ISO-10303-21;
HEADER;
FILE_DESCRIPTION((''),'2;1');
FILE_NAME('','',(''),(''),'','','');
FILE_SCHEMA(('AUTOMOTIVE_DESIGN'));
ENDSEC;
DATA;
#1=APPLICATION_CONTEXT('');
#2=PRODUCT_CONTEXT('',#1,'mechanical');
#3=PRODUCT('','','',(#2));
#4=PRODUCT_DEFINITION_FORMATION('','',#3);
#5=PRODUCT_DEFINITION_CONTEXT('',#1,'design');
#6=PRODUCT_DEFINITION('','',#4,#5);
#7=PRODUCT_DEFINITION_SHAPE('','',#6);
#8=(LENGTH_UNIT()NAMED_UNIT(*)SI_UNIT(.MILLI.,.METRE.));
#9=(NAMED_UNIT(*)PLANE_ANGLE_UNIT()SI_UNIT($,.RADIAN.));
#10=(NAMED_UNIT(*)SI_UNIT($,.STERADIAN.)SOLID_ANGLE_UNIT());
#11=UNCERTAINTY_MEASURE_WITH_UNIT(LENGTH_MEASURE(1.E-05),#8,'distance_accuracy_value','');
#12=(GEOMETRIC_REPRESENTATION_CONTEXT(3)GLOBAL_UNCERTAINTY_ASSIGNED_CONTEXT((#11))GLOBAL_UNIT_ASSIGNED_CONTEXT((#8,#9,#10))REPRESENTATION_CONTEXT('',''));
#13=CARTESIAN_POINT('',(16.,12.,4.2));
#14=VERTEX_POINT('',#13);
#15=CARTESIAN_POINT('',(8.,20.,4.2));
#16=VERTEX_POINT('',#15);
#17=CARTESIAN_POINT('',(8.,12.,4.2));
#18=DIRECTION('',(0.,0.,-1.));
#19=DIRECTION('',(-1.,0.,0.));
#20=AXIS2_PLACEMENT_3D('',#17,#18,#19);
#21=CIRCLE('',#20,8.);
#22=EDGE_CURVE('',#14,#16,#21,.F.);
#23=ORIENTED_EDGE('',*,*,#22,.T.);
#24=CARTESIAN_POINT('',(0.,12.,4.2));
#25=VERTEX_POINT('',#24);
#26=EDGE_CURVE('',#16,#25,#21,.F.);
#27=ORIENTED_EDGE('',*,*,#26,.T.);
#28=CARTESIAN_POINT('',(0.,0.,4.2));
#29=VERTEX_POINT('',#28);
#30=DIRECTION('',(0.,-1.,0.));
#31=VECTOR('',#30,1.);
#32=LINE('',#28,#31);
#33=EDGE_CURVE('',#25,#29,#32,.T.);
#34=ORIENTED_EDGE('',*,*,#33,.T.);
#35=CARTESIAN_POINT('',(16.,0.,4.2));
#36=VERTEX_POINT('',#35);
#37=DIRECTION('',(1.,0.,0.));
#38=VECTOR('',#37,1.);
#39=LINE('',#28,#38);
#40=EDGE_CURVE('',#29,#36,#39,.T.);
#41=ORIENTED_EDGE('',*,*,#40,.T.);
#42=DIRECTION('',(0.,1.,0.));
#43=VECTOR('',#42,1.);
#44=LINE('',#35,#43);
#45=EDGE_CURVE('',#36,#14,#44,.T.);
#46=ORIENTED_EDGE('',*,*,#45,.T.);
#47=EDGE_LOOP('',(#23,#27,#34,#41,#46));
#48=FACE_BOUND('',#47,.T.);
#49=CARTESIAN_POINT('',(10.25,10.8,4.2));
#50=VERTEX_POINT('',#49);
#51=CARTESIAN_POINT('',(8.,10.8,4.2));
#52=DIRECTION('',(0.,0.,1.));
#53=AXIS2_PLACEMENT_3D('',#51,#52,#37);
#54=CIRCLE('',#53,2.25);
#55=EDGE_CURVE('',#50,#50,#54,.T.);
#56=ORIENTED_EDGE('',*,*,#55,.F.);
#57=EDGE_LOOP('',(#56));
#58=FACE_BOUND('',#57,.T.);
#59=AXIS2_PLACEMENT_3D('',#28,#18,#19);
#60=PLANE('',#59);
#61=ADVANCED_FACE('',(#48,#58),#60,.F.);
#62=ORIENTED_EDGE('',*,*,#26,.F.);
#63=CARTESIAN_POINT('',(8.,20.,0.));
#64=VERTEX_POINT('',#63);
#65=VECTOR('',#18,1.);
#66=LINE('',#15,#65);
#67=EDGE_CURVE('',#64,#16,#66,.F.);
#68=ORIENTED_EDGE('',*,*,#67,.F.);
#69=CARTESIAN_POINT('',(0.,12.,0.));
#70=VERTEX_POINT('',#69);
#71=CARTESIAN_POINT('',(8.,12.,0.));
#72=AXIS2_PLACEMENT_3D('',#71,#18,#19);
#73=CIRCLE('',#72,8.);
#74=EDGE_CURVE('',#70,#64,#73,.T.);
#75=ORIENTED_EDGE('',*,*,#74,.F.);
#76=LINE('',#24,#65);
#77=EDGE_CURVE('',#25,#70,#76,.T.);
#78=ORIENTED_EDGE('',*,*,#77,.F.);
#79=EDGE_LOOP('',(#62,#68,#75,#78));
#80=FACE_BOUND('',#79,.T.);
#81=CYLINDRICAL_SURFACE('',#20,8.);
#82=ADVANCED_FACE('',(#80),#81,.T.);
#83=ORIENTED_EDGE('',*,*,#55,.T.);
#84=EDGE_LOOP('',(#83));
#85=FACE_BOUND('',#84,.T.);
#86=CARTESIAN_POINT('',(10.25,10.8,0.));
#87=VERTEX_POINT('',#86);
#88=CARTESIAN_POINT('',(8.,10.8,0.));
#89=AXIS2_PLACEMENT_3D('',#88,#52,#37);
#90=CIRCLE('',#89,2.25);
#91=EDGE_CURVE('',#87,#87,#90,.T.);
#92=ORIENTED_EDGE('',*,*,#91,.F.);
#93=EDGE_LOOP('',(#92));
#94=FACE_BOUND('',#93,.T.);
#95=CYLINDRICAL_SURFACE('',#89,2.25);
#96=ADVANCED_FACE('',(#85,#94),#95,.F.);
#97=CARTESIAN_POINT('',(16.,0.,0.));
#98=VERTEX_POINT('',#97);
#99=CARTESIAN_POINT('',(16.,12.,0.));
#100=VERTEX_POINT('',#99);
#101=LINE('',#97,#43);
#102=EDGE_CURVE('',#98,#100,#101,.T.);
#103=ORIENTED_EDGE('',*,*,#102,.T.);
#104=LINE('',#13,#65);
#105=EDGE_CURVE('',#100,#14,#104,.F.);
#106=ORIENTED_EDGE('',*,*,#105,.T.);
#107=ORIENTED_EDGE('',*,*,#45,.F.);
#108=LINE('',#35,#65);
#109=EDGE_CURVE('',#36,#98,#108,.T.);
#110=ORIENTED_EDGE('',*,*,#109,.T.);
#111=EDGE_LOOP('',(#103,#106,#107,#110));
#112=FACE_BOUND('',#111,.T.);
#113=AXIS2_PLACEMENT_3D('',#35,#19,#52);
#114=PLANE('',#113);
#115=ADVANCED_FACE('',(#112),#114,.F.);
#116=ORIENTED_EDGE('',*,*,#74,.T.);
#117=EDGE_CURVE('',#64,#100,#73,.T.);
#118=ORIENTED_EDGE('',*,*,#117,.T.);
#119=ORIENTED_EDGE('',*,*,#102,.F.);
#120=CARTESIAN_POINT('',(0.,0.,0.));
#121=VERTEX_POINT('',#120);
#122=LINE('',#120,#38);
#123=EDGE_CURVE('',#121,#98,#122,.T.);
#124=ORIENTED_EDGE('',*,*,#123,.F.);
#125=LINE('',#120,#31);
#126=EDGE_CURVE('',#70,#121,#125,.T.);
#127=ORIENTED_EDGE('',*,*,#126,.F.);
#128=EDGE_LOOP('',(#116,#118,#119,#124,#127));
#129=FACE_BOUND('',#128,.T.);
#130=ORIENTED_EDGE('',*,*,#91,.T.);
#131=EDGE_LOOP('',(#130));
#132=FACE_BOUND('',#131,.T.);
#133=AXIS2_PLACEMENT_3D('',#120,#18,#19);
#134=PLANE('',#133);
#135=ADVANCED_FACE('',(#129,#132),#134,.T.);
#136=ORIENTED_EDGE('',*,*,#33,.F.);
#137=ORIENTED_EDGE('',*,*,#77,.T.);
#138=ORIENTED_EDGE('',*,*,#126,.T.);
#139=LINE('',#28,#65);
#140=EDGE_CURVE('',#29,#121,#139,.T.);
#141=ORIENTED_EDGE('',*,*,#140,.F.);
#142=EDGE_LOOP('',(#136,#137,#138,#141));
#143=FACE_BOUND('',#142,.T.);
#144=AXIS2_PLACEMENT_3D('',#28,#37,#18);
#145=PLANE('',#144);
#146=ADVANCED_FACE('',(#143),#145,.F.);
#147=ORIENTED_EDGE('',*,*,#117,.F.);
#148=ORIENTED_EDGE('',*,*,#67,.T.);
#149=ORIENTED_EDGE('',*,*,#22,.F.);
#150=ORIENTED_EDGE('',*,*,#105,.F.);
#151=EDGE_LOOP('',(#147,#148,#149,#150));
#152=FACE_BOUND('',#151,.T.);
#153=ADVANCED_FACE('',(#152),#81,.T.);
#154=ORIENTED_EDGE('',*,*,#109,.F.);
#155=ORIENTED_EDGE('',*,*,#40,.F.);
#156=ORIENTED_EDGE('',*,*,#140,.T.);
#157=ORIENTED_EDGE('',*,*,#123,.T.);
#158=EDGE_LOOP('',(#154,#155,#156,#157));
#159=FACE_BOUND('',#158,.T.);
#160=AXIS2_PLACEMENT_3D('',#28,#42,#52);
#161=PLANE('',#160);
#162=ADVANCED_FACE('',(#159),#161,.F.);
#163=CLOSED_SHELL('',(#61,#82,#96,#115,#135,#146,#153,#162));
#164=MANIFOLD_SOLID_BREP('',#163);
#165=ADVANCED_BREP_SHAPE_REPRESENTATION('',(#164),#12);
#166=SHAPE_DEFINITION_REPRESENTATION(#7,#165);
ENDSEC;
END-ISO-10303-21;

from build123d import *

# Parameters (mm, degrees)
SKETCH1_W           = 16
SKETCH1_H           = 20
BOSS_EXTRUDE1_DEPTH = 4.2
SKETCH2_R           = 2.25
CUT_EXTRUDE1_DEPTH  = 26.954575704
FILLET1_R           = 8


with BuildPart() as part:
    # Sketch1 → Boss-Extrude1 (new body)
    with BuildSketch(Plane.XY):
        with Locations((8, 10)):
            Rectangle(SKETCH1_W, SKETCH1_H)
    extrude(amount=BOSS_EXTRUDE1_DEPTH)

    # Sketch2 → Cut-Extrude1 (cut, through all)
    with BuildSketch(Plane.XY.offset(4.2)):
        with Locations((8, 10.8)):
            Circle(SKETCH2_R)
    extrude(amount=-CUT_EXTRUDE1_DEPTH, mode=Mode.SUBTRACT)

    # Fillet1
    fillet1_edges = [part.edges().sort_by_distance(p)[0] for p in [
        (16, 20, 2.1),
        (0, 20, 2.1),
    ]]
    fillet(fillet1_edges, radius=FILLET1_R - 0.0001)  # a hair under: the kernel refuses the full size


solid = part.part
